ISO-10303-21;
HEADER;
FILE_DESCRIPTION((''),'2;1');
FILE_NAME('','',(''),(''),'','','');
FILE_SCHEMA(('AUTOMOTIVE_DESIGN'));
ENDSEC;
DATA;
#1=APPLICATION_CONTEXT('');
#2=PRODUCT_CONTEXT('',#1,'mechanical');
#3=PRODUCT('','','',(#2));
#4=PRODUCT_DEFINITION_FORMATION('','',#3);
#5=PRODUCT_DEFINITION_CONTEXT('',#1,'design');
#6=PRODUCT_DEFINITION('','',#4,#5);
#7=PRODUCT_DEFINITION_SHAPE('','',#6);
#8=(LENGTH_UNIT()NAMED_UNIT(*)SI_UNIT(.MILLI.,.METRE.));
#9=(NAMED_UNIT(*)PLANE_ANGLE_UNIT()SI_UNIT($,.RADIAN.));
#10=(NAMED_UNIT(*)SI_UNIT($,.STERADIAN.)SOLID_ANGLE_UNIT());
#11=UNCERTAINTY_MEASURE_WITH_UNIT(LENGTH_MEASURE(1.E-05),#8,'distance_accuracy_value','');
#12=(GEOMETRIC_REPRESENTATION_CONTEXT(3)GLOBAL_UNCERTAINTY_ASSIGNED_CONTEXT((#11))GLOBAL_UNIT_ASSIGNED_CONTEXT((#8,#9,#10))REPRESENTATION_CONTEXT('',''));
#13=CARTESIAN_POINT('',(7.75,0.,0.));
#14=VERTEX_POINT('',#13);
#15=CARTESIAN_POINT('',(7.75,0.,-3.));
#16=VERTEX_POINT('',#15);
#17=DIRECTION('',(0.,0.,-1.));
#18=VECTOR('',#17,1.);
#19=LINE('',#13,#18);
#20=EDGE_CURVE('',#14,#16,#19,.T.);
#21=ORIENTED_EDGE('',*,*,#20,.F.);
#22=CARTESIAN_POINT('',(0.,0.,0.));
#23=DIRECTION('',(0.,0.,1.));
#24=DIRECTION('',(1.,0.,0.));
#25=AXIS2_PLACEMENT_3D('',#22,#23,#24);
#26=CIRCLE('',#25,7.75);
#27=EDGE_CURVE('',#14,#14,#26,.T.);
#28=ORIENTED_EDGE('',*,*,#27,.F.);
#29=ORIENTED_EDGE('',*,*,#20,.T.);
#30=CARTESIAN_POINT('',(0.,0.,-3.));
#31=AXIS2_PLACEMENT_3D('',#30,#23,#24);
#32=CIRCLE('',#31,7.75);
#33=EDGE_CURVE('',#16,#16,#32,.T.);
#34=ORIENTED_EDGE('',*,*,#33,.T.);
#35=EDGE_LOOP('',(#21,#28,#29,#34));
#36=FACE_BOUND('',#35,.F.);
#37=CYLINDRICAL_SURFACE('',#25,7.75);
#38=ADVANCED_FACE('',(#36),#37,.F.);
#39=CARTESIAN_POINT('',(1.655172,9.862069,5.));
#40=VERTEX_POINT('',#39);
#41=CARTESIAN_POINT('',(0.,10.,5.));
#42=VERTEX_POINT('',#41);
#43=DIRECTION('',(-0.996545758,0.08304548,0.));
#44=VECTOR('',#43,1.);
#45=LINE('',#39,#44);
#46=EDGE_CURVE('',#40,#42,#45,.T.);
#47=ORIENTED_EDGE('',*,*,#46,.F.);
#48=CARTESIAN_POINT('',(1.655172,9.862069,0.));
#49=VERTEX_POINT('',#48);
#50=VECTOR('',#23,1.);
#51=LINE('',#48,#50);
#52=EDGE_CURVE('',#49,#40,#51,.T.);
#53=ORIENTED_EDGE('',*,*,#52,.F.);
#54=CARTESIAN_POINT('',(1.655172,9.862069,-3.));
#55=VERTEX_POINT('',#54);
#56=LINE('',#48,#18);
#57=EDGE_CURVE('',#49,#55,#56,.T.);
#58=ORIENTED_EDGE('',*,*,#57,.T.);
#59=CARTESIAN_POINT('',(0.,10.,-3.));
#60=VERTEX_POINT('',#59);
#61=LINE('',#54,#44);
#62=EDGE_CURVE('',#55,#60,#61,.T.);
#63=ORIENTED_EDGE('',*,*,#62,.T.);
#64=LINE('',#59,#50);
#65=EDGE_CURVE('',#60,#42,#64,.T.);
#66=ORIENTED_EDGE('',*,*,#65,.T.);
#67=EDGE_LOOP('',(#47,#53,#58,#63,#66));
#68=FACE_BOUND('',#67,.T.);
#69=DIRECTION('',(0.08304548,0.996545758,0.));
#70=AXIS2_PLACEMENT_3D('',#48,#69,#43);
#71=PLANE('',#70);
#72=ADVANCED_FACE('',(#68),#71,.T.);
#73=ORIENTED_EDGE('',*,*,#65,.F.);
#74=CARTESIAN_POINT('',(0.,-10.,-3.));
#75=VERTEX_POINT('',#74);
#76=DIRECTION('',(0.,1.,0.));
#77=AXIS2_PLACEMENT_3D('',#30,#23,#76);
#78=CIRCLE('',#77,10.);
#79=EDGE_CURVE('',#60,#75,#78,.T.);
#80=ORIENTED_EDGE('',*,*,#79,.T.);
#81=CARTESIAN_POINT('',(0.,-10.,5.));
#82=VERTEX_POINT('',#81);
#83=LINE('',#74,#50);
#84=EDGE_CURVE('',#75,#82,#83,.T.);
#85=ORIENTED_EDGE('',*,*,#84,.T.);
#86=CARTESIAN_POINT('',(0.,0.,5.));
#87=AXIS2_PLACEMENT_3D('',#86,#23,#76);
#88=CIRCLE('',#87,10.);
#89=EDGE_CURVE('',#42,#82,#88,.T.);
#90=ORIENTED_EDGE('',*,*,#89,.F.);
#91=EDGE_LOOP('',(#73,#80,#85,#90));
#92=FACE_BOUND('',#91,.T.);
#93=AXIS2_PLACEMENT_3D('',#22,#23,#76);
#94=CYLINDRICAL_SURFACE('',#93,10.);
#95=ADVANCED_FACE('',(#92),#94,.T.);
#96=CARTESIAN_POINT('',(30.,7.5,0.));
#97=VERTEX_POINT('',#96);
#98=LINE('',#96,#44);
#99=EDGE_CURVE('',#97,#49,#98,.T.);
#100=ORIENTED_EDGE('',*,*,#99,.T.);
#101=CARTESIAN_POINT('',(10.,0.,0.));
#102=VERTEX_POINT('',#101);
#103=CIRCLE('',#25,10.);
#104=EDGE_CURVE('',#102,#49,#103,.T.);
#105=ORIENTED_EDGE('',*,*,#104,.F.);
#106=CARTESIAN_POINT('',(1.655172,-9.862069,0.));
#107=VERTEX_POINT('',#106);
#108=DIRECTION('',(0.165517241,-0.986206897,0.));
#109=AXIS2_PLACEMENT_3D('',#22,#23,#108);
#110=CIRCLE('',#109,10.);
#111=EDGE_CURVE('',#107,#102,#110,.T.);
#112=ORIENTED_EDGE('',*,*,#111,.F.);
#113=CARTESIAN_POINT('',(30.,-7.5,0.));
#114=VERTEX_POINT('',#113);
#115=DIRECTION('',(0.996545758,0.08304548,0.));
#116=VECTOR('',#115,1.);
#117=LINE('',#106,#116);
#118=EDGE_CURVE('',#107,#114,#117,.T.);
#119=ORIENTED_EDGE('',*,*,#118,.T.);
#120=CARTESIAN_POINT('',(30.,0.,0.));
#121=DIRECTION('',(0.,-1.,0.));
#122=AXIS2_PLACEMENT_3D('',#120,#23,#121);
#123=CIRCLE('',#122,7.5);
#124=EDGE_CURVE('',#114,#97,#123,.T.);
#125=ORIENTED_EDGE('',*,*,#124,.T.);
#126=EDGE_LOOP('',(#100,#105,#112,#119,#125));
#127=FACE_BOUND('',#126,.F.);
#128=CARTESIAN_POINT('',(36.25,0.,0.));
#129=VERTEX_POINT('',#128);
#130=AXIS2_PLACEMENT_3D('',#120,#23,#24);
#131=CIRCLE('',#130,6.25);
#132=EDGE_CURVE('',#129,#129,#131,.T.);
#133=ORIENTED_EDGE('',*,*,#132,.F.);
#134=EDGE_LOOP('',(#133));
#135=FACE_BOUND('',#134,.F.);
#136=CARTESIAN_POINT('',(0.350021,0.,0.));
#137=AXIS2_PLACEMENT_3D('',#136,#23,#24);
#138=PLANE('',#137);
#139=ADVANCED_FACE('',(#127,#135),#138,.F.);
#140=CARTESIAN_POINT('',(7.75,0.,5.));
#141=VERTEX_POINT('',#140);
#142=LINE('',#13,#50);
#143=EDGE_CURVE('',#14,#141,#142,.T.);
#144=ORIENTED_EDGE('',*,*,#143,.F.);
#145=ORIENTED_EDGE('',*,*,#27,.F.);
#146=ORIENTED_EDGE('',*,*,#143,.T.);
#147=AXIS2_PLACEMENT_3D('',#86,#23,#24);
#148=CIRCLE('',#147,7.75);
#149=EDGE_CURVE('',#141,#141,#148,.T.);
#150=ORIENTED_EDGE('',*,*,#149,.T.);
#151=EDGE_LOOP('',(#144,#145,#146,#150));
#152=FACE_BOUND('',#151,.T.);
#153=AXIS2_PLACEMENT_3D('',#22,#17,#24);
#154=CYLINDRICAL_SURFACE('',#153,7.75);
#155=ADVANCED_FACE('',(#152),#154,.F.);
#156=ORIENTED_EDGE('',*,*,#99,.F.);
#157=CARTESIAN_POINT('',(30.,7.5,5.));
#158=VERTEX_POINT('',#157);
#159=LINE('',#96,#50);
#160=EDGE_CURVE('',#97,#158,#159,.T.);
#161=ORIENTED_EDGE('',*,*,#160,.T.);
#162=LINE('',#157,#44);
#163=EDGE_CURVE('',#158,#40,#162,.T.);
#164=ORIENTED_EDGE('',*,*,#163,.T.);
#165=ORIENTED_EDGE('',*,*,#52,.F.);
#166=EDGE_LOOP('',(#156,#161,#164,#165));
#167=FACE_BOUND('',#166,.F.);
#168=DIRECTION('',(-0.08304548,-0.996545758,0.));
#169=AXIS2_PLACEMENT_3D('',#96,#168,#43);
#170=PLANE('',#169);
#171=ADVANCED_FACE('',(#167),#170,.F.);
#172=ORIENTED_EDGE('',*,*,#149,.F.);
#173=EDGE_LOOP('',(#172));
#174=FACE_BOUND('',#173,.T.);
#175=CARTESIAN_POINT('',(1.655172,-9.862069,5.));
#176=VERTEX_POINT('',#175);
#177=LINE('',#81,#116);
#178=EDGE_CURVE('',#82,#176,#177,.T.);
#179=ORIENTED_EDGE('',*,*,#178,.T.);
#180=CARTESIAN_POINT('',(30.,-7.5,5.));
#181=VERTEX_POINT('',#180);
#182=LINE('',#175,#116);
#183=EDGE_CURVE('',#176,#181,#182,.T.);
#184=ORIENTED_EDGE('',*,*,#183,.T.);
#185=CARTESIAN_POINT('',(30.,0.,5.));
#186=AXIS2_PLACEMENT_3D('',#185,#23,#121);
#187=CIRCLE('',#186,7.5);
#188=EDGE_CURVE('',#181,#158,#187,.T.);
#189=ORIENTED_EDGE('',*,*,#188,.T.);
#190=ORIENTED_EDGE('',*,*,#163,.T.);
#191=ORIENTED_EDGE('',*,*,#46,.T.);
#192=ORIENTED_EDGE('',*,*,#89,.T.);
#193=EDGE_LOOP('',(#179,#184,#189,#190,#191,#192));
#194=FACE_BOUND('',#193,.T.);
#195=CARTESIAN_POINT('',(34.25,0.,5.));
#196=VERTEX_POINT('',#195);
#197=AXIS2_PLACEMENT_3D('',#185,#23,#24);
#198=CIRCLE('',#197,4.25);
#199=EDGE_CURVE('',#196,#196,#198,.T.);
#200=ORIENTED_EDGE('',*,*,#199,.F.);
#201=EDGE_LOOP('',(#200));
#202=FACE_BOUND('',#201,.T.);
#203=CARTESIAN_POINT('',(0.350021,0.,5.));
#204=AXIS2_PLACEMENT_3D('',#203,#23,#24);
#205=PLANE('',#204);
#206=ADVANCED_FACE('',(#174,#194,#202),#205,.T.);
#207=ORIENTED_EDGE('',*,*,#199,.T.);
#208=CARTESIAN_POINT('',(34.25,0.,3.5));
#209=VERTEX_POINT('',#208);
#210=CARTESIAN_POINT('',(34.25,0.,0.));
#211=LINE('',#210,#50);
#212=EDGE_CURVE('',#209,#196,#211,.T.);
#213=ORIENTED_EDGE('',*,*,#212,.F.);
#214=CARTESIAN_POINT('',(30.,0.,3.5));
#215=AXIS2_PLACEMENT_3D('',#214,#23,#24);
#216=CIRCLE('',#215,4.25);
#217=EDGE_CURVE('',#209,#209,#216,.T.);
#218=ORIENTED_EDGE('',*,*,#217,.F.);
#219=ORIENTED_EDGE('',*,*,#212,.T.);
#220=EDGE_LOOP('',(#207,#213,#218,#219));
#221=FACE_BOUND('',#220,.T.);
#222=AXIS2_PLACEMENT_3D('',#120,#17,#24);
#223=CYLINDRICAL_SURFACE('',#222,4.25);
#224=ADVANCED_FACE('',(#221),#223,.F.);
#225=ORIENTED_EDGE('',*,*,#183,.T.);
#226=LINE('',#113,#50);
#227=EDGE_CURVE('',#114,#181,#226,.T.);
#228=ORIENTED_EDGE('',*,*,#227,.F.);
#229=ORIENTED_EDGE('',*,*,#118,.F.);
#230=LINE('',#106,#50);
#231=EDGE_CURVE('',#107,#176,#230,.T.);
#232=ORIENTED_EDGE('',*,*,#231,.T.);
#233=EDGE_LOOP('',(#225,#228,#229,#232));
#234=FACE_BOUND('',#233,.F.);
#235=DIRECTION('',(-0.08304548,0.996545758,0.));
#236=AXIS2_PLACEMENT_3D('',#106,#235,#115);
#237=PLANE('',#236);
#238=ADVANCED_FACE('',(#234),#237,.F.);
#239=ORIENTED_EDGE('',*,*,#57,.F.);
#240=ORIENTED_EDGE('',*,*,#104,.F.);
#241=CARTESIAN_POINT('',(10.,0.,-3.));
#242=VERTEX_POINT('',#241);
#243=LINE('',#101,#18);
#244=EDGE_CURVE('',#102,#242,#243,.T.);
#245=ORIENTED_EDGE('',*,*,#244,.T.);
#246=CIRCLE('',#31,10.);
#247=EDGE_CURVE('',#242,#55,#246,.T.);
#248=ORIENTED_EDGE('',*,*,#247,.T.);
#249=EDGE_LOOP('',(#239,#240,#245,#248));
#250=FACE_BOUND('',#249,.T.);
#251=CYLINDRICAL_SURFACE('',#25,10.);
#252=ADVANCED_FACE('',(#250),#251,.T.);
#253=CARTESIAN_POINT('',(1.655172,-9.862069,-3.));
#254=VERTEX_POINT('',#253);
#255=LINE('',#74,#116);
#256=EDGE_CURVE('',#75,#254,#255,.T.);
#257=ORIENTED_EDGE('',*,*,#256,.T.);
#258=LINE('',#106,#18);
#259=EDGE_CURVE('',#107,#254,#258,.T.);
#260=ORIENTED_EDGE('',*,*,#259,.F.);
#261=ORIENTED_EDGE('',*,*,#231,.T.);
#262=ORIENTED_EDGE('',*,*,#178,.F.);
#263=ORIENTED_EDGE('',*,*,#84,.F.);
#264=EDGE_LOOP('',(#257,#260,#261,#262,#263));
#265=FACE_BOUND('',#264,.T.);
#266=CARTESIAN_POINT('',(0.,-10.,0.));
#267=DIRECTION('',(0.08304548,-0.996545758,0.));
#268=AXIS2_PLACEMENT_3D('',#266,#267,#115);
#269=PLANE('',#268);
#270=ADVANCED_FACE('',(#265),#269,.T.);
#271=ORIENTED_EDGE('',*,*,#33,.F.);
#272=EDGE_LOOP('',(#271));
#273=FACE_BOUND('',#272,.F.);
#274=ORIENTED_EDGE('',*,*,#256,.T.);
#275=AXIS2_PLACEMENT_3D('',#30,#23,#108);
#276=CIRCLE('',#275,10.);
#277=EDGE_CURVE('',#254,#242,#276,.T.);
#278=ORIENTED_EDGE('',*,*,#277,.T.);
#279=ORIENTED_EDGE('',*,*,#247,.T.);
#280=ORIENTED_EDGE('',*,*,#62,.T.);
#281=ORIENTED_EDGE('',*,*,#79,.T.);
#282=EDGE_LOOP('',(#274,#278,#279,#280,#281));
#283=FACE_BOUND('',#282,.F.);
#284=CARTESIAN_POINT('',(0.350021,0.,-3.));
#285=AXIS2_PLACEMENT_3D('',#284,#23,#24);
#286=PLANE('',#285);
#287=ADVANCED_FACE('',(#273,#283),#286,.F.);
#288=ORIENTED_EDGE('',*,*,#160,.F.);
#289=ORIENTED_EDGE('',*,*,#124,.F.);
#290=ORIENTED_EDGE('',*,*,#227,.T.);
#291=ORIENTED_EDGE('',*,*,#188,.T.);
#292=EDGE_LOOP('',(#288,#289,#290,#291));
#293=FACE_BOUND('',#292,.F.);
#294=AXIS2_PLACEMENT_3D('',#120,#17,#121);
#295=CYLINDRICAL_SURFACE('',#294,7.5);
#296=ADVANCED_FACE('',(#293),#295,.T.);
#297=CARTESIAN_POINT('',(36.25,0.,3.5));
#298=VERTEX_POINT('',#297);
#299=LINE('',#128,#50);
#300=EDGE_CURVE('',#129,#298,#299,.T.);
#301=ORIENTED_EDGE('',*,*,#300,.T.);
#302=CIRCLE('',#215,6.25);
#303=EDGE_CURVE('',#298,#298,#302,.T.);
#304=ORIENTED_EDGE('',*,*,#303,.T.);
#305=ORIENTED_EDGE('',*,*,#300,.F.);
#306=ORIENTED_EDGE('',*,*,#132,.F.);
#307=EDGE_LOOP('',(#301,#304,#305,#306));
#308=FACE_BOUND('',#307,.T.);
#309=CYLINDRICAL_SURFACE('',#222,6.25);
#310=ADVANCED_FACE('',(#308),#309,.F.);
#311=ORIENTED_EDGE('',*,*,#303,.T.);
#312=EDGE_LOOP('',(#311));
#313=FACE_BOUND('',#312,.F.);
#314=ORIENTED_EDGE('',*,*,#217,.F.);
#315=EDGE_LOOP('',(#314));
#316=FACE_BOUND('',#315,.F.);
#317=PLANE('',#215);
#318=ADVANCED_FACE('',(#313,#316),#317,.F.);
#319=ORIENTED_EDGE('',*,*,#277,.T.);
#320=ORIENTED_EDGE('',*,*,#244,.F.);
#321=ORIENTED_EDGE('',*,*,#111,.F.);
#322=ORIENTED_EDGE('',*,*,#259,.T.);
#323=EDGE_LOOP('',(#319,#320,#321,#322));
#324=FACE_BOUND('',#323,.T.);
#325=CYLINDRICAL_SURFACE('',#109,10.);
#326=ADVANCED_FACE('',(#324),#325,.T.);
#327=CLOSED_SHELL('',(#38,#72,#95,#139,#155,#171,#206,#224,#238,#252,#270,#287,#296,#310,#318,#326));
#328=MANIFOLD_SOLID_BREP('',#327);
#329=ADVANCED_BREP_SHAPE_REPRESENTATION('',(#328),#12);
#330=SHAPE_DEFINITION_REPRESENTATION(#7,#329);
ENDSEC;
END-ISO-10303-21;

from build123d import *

# Parameters (mm, degrees)
F0_R     = 7.75
F0_R_2   = 6.25
F0_R_3   = 4.25
F1_DEPTH = 5
F2_DEPTH = 3
F3_DEPTH = 3.5


with BuildPart() as f1:
    # F0 (on Top) → F1 (new body)
    with BuildSketch(Plane.XY):
        with BuildLine():
            Line((1.6551724138, 9.8620689655), (0, 10))
            ThreePointArc((0, 10), (-10, 0), (0, -10))
            Line((0, -10), (1.6551724138, -9.8620689655))
            ThreePointArc((1.6551724138, -9.8620689655), (7.6338628537, -6.4594224147), (10, 0))
            ThreePointArc((10, 0), (7.6338628537, 6.4594224147), (1.6551724138, 9.8620689655))
        make_face()
        Circle(F0_R, mode=Mode.SUBTRACT)
        with BuildLine():
            Line((30, 7.5), (1.6551724138, 9.8620689655))
            ThreePointArc((1.6551724138, 9.8620689655), (7.6338628537, 6.4594224147), (10, 0))
            ThreePointArc((10, 0), (7.6338628537, -6.4594224147), (1.6551724138, -9.8620689655))
            Line((1.6551724138, -9.8620689655), (30, -7.5))
            ThreePointArc((30, -7.5), (22.5, 0), (30, 7.5))
        make_face()
        with BuildLine():
            ThreePointArc((37.5, 0), (35.3033008589, 5.3033008589), (30, 7.5))
            ThreePointArc((30, 7.5), (22.5, 0), (30, -7.5))
            ThreePointArc((30, -7.5), (35.3033008589, -5.3033008589), (37.5, 0))
        make_face()
        with Locations((30, 0)):
            Circle(F0_R_2, mode=Mode.SUBTRACT)
        with Locations((30, 0)):
            Circle(F0_R_2)
        with Locations((30, 0)):
            Circle(F0_R_3, mode=Mode.SUBTRACT)
    extrude(amount=F1_DEPTH)

    # F0 (on Top) → F2 (join)
    with BuildSketch(Plane.XY):
        with BuildLine():
            Line((1.6551724138, 9.8620689655), (0, 10))
            ThreePointArc((0, 10), (-10, 0), (0, -10))
            Line((0, -10), (1.6551724138, -9.8620689655))
            ThreePointArc((1.6551724138, -9.8620689655), (7.6338628537, -6.4594224147), (10, 0))
            ThreePointArc((10, 0), (7.6338628537, 6.4594224147), (1.6551724138, 9.8620689655))
        make_face()
        Circle(F0_R, mode=Mode.SUBTRACT)
    extrude(amount=-F2_DEPTH)

    # F0 (on Top) → F3 (cut)
    with BuildSketch(Plane.XY):
        with Locations((30, 0)):
            Circle(F0_R_2)
        with Locations((30, 0)):
            Circle(F0_R_3, mode=Mode.SUBTRACT)
    extrude(amount=F3_DEPTH, mode=Mode.SUBTRACT)


solid = f1.part
